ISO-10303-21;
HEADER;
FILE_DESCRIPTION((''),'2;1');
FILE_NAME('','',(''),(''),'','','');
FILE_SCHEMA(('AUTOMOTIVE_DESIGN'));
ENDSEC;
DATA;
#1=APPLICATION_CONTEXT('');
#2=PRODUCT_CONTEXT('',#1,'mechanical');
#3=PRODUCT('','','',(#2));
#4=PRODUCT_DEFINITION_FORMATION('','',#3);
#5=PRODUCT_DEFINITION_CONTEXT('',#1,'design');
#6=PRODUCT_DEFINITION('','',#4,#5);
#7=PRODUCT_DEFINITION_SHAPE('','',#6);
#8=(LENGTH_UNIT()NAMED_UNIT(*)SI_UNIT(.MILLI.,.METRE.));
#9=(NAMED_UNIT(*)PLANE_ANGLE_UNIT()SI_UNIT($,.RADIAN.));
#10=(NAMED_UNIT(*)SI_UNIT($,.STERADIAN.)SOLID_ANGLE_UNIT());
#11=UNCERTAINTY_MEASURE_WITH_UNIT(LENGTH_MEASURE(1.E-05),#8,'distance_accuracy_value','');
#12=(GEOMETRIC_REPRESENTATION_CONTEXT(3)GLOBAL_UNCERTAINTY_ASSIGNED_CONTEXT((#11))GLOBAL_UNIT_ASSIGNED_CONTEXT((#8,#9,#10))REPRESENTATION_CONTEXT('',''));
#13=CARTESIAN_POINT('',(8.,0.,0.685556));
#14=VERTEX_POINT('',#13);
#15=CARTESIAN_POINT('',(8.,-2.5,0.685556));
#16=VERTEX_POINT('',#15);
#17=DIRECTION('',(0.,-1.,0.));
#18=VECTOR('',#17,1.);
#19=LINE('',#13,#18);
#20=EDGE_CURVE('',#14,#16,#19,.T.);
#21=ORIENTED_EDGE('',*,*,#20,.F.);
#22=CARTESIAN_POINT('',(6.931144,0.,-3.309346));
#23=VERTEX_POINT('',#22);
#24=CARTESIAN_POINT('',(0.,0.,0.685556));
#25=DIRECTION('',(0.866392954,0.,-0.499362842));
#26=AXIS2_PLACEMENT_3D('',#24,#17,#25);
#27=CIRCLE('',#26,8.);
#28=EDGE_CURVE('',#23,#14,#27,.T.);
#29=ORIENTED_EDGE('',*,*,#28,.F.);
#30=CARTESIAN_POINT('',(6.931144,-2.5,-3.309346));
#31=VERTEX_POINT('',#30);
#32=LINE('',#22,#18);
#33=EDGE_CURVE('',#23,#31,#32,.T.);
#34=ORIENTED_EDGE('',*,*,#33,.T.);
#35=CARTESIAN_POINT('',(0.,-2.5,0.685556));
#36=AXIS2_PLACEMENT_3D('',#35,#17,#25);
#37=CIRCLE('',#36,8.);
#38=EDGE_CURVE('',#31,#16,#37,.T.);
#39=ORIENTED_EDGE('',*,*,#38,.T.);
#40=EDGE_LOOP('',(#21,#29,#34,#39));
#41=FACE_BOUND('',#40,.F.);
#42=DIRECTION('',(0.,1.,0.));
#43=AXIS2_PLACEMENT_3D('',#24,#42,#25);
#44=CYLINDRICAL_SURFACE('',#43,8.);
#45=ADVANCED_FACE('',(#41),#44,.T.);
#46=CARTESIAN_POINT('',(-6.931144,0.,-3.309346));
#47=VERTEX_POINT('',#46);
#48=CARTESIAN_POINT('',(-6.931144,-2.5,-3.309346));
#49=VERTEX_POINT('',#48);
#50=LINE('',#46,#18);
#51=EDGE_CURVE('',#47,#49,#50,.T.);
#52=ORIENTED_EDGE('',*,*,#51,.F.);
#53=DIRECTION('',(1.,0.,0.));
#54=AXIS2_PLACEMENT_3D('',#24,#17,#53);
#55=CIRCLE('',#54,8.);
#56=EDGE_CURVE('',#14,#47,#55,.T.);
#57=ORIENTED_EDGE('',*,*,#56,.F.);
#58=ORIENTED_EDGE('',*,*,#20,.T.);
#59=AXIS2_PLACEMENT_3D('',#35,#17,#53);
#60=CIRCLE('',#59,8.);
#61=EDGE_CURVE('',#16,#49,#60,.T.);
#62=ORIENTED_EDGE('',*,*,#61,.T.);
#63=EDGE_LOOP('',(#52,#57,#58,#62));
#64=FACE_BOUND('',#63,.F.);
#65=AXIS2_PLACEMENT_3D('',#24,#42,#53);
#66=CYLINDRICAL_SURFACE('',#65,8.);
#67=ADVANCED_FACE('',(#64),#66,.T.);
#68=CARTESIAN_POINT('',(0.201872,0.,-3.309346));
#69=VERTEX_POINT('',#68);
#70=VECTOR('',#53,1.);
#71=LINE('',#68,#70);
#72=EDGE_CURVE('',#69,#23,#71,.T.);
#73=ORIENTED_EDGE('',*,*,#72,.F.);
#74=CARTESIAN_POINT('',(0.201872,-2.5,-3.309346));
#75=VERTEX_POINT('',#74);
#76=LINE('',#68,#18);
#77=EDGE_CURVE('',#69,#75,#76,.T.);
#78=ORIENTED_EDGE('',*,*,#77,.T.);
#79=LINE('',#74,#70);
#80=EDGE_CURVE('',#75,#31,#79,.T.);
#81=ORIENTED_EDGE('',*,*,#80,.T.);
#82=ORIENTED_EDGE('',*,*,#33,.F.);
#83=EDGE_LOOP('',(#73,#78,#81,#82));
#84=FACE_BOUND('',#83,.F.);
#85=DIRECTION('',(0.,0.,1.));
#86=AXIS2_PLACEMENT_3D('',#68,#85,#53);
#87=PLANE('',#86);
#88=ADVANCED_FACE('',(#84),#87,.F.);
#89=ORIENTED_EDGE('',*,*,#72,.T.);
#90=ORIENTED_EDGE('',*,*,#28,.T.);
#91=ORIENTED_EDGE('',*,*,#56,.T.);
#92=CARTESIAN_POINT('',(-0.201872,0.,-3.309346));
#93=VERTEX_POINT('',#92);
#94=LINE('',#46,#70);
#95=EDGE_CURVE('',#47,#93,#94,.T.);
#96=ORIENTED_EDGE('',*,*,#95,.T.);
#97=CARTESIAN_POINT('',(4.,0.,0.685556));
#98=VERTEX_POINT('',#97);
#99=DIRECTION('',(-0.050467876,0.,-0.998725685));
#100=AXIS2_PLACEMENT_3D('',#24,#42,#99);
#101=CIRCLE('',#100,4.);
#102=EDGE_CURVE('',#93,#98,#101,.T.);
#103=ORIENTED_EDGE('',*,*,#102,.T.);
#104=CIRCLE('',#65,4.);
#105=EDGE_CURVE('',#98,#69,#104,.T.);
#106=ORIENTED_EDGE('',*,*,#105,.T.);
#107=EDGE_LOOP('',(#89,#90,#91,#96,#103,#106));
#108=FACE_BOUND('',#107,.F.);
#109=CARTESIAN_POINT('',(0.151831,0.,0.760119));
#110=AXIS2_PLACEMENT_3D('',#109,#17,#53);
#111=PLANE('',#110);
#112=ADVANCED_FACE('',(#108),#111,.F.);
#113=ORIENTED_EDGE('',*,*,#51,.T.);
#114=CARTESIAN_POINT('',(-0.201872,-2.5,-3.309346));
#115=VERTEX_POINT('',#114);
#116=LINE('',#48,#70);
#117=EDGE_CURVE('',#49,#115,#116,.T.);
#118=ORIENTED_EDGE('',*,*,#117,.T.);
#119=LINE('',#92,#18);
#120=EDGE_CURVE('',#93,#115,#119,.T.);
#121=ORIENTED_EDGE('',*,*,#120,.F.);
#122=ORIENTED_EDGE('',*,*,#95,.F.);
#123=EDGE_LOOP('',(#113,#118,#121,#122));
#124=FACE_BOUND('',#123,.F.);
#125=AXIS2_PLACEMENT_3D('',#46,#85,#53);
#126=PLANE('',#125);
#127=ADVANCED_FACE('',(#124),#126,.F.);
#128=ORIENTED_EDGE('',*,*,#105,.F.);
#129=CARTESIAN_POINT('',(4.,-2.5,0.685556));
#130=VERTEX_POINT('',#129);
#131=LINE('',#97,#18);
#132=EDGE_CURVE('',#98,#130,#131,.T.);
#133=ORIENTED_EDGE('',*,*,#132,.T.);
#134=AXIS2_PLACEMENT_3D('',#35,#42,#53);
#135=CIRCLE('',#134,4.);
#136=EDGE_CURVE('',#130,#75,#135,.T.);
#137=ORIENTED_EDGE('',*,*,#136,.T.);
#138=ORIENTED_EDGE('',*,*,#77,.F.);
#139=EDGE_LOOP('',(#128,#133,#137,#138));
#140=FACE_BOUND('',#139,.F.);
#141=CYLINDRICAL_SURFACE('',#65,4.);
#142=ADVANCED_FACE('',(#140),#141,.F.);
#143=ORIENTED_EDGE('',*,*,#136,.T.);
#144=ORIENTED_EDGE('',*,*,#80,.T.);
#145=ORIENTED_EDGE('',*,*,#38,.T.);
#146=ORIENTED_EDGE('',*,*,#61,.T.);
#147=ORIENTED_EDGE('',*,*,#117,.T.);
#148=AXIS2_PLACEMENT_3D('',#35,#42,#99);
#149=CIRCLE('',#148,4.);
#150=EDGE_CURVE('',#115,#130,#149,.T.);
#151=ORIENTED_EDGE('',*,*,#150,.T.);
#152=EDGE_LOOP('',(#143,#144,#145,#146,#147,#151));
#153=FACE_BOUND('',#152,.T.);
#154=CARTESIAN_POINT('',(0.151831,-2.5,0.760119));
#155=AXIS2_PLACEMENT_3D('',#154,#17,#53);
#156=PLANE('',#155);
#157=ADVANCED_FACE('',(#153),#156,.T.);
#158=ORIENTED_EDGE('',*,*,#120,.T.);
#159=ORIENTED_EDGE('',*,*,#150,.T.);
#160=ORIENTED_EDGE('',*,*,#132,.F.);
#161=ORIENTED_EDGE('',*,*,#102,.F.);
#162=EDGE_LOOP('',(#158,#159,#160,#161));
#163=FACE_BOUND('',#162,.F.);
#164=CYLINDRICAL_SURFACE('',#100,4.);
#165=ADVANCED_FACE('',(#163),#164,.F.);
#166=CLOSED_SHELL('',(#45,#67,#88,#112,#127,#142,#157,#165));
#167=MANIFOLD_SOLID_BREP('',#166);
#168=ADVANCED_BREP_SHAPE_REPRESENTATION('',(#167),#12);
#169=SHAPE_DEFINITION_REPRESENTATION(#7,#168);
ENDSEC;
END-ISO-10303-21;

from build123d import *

# Parameters (mm, degrees)
F1_DEPTH = 2.5


# Not quite as in the source:
# - a feature names something its author has since deleted; it is built from what else it names


with BuildPart() as f1:
    # F0 (on Front) → F1 (new body)
    with BuildSketch(Plane.XZ):
        with BuildLine():
            ThreePointArc((-0.2018715048, -3.3093462615), (-2.7561308007, 3.5844774855), (4, 0.6855564776))
            ThreePointArc((4, 0.6855564776), (2.8989210078, -2.070574323), (0.2018715048, -3.3093462615))
            Line((0.2018715048, -3.3093462615), (4.4766898602, -3.3093462615))
            ThreePointArc((4.4766898602, -3.3093462615), (5.6062527218, -1.4521830807), (6, 0.6855564776))
            ThreePointArc((6, 0.6855564776), (-2.1377395584, 6.2918091994), (-4.4766898602, -3.3093462615))
            Line((-4.4766898602, -3.3093462615), (-0.2018715048, -3.3093462615))
        make_face()
        with BuildLine():
            Line((-6.9311436361, -3.3093462615), (-4.4766898602, -3.3093462615))
            ThreePointArc((-4.4766898602, -3.3093462615), (-2.1377395584, 6.2918091994), (6, 0.6855564776))
            ThreePointArc((6, 0.6855564776), (5.6062527218, -1.4521830807), (4.4766898602, -3.3093462615))
            Line((4.4766898602, -3.3093462615), (6.9311436361, -3.3093462615))
            ThreePointArc((6.9311436361, -3.3093462615), (7.7281676059, -1.3821537186), (8, 0.6855564776))
            ThreePointArc((8, 0.6855564776), (-2.0677101962, 8.4137240835), (-6.9311436361, -3.3093462615))
        make_face()
    extrude(amount=F1_DEPTH)


solid = f1.part
